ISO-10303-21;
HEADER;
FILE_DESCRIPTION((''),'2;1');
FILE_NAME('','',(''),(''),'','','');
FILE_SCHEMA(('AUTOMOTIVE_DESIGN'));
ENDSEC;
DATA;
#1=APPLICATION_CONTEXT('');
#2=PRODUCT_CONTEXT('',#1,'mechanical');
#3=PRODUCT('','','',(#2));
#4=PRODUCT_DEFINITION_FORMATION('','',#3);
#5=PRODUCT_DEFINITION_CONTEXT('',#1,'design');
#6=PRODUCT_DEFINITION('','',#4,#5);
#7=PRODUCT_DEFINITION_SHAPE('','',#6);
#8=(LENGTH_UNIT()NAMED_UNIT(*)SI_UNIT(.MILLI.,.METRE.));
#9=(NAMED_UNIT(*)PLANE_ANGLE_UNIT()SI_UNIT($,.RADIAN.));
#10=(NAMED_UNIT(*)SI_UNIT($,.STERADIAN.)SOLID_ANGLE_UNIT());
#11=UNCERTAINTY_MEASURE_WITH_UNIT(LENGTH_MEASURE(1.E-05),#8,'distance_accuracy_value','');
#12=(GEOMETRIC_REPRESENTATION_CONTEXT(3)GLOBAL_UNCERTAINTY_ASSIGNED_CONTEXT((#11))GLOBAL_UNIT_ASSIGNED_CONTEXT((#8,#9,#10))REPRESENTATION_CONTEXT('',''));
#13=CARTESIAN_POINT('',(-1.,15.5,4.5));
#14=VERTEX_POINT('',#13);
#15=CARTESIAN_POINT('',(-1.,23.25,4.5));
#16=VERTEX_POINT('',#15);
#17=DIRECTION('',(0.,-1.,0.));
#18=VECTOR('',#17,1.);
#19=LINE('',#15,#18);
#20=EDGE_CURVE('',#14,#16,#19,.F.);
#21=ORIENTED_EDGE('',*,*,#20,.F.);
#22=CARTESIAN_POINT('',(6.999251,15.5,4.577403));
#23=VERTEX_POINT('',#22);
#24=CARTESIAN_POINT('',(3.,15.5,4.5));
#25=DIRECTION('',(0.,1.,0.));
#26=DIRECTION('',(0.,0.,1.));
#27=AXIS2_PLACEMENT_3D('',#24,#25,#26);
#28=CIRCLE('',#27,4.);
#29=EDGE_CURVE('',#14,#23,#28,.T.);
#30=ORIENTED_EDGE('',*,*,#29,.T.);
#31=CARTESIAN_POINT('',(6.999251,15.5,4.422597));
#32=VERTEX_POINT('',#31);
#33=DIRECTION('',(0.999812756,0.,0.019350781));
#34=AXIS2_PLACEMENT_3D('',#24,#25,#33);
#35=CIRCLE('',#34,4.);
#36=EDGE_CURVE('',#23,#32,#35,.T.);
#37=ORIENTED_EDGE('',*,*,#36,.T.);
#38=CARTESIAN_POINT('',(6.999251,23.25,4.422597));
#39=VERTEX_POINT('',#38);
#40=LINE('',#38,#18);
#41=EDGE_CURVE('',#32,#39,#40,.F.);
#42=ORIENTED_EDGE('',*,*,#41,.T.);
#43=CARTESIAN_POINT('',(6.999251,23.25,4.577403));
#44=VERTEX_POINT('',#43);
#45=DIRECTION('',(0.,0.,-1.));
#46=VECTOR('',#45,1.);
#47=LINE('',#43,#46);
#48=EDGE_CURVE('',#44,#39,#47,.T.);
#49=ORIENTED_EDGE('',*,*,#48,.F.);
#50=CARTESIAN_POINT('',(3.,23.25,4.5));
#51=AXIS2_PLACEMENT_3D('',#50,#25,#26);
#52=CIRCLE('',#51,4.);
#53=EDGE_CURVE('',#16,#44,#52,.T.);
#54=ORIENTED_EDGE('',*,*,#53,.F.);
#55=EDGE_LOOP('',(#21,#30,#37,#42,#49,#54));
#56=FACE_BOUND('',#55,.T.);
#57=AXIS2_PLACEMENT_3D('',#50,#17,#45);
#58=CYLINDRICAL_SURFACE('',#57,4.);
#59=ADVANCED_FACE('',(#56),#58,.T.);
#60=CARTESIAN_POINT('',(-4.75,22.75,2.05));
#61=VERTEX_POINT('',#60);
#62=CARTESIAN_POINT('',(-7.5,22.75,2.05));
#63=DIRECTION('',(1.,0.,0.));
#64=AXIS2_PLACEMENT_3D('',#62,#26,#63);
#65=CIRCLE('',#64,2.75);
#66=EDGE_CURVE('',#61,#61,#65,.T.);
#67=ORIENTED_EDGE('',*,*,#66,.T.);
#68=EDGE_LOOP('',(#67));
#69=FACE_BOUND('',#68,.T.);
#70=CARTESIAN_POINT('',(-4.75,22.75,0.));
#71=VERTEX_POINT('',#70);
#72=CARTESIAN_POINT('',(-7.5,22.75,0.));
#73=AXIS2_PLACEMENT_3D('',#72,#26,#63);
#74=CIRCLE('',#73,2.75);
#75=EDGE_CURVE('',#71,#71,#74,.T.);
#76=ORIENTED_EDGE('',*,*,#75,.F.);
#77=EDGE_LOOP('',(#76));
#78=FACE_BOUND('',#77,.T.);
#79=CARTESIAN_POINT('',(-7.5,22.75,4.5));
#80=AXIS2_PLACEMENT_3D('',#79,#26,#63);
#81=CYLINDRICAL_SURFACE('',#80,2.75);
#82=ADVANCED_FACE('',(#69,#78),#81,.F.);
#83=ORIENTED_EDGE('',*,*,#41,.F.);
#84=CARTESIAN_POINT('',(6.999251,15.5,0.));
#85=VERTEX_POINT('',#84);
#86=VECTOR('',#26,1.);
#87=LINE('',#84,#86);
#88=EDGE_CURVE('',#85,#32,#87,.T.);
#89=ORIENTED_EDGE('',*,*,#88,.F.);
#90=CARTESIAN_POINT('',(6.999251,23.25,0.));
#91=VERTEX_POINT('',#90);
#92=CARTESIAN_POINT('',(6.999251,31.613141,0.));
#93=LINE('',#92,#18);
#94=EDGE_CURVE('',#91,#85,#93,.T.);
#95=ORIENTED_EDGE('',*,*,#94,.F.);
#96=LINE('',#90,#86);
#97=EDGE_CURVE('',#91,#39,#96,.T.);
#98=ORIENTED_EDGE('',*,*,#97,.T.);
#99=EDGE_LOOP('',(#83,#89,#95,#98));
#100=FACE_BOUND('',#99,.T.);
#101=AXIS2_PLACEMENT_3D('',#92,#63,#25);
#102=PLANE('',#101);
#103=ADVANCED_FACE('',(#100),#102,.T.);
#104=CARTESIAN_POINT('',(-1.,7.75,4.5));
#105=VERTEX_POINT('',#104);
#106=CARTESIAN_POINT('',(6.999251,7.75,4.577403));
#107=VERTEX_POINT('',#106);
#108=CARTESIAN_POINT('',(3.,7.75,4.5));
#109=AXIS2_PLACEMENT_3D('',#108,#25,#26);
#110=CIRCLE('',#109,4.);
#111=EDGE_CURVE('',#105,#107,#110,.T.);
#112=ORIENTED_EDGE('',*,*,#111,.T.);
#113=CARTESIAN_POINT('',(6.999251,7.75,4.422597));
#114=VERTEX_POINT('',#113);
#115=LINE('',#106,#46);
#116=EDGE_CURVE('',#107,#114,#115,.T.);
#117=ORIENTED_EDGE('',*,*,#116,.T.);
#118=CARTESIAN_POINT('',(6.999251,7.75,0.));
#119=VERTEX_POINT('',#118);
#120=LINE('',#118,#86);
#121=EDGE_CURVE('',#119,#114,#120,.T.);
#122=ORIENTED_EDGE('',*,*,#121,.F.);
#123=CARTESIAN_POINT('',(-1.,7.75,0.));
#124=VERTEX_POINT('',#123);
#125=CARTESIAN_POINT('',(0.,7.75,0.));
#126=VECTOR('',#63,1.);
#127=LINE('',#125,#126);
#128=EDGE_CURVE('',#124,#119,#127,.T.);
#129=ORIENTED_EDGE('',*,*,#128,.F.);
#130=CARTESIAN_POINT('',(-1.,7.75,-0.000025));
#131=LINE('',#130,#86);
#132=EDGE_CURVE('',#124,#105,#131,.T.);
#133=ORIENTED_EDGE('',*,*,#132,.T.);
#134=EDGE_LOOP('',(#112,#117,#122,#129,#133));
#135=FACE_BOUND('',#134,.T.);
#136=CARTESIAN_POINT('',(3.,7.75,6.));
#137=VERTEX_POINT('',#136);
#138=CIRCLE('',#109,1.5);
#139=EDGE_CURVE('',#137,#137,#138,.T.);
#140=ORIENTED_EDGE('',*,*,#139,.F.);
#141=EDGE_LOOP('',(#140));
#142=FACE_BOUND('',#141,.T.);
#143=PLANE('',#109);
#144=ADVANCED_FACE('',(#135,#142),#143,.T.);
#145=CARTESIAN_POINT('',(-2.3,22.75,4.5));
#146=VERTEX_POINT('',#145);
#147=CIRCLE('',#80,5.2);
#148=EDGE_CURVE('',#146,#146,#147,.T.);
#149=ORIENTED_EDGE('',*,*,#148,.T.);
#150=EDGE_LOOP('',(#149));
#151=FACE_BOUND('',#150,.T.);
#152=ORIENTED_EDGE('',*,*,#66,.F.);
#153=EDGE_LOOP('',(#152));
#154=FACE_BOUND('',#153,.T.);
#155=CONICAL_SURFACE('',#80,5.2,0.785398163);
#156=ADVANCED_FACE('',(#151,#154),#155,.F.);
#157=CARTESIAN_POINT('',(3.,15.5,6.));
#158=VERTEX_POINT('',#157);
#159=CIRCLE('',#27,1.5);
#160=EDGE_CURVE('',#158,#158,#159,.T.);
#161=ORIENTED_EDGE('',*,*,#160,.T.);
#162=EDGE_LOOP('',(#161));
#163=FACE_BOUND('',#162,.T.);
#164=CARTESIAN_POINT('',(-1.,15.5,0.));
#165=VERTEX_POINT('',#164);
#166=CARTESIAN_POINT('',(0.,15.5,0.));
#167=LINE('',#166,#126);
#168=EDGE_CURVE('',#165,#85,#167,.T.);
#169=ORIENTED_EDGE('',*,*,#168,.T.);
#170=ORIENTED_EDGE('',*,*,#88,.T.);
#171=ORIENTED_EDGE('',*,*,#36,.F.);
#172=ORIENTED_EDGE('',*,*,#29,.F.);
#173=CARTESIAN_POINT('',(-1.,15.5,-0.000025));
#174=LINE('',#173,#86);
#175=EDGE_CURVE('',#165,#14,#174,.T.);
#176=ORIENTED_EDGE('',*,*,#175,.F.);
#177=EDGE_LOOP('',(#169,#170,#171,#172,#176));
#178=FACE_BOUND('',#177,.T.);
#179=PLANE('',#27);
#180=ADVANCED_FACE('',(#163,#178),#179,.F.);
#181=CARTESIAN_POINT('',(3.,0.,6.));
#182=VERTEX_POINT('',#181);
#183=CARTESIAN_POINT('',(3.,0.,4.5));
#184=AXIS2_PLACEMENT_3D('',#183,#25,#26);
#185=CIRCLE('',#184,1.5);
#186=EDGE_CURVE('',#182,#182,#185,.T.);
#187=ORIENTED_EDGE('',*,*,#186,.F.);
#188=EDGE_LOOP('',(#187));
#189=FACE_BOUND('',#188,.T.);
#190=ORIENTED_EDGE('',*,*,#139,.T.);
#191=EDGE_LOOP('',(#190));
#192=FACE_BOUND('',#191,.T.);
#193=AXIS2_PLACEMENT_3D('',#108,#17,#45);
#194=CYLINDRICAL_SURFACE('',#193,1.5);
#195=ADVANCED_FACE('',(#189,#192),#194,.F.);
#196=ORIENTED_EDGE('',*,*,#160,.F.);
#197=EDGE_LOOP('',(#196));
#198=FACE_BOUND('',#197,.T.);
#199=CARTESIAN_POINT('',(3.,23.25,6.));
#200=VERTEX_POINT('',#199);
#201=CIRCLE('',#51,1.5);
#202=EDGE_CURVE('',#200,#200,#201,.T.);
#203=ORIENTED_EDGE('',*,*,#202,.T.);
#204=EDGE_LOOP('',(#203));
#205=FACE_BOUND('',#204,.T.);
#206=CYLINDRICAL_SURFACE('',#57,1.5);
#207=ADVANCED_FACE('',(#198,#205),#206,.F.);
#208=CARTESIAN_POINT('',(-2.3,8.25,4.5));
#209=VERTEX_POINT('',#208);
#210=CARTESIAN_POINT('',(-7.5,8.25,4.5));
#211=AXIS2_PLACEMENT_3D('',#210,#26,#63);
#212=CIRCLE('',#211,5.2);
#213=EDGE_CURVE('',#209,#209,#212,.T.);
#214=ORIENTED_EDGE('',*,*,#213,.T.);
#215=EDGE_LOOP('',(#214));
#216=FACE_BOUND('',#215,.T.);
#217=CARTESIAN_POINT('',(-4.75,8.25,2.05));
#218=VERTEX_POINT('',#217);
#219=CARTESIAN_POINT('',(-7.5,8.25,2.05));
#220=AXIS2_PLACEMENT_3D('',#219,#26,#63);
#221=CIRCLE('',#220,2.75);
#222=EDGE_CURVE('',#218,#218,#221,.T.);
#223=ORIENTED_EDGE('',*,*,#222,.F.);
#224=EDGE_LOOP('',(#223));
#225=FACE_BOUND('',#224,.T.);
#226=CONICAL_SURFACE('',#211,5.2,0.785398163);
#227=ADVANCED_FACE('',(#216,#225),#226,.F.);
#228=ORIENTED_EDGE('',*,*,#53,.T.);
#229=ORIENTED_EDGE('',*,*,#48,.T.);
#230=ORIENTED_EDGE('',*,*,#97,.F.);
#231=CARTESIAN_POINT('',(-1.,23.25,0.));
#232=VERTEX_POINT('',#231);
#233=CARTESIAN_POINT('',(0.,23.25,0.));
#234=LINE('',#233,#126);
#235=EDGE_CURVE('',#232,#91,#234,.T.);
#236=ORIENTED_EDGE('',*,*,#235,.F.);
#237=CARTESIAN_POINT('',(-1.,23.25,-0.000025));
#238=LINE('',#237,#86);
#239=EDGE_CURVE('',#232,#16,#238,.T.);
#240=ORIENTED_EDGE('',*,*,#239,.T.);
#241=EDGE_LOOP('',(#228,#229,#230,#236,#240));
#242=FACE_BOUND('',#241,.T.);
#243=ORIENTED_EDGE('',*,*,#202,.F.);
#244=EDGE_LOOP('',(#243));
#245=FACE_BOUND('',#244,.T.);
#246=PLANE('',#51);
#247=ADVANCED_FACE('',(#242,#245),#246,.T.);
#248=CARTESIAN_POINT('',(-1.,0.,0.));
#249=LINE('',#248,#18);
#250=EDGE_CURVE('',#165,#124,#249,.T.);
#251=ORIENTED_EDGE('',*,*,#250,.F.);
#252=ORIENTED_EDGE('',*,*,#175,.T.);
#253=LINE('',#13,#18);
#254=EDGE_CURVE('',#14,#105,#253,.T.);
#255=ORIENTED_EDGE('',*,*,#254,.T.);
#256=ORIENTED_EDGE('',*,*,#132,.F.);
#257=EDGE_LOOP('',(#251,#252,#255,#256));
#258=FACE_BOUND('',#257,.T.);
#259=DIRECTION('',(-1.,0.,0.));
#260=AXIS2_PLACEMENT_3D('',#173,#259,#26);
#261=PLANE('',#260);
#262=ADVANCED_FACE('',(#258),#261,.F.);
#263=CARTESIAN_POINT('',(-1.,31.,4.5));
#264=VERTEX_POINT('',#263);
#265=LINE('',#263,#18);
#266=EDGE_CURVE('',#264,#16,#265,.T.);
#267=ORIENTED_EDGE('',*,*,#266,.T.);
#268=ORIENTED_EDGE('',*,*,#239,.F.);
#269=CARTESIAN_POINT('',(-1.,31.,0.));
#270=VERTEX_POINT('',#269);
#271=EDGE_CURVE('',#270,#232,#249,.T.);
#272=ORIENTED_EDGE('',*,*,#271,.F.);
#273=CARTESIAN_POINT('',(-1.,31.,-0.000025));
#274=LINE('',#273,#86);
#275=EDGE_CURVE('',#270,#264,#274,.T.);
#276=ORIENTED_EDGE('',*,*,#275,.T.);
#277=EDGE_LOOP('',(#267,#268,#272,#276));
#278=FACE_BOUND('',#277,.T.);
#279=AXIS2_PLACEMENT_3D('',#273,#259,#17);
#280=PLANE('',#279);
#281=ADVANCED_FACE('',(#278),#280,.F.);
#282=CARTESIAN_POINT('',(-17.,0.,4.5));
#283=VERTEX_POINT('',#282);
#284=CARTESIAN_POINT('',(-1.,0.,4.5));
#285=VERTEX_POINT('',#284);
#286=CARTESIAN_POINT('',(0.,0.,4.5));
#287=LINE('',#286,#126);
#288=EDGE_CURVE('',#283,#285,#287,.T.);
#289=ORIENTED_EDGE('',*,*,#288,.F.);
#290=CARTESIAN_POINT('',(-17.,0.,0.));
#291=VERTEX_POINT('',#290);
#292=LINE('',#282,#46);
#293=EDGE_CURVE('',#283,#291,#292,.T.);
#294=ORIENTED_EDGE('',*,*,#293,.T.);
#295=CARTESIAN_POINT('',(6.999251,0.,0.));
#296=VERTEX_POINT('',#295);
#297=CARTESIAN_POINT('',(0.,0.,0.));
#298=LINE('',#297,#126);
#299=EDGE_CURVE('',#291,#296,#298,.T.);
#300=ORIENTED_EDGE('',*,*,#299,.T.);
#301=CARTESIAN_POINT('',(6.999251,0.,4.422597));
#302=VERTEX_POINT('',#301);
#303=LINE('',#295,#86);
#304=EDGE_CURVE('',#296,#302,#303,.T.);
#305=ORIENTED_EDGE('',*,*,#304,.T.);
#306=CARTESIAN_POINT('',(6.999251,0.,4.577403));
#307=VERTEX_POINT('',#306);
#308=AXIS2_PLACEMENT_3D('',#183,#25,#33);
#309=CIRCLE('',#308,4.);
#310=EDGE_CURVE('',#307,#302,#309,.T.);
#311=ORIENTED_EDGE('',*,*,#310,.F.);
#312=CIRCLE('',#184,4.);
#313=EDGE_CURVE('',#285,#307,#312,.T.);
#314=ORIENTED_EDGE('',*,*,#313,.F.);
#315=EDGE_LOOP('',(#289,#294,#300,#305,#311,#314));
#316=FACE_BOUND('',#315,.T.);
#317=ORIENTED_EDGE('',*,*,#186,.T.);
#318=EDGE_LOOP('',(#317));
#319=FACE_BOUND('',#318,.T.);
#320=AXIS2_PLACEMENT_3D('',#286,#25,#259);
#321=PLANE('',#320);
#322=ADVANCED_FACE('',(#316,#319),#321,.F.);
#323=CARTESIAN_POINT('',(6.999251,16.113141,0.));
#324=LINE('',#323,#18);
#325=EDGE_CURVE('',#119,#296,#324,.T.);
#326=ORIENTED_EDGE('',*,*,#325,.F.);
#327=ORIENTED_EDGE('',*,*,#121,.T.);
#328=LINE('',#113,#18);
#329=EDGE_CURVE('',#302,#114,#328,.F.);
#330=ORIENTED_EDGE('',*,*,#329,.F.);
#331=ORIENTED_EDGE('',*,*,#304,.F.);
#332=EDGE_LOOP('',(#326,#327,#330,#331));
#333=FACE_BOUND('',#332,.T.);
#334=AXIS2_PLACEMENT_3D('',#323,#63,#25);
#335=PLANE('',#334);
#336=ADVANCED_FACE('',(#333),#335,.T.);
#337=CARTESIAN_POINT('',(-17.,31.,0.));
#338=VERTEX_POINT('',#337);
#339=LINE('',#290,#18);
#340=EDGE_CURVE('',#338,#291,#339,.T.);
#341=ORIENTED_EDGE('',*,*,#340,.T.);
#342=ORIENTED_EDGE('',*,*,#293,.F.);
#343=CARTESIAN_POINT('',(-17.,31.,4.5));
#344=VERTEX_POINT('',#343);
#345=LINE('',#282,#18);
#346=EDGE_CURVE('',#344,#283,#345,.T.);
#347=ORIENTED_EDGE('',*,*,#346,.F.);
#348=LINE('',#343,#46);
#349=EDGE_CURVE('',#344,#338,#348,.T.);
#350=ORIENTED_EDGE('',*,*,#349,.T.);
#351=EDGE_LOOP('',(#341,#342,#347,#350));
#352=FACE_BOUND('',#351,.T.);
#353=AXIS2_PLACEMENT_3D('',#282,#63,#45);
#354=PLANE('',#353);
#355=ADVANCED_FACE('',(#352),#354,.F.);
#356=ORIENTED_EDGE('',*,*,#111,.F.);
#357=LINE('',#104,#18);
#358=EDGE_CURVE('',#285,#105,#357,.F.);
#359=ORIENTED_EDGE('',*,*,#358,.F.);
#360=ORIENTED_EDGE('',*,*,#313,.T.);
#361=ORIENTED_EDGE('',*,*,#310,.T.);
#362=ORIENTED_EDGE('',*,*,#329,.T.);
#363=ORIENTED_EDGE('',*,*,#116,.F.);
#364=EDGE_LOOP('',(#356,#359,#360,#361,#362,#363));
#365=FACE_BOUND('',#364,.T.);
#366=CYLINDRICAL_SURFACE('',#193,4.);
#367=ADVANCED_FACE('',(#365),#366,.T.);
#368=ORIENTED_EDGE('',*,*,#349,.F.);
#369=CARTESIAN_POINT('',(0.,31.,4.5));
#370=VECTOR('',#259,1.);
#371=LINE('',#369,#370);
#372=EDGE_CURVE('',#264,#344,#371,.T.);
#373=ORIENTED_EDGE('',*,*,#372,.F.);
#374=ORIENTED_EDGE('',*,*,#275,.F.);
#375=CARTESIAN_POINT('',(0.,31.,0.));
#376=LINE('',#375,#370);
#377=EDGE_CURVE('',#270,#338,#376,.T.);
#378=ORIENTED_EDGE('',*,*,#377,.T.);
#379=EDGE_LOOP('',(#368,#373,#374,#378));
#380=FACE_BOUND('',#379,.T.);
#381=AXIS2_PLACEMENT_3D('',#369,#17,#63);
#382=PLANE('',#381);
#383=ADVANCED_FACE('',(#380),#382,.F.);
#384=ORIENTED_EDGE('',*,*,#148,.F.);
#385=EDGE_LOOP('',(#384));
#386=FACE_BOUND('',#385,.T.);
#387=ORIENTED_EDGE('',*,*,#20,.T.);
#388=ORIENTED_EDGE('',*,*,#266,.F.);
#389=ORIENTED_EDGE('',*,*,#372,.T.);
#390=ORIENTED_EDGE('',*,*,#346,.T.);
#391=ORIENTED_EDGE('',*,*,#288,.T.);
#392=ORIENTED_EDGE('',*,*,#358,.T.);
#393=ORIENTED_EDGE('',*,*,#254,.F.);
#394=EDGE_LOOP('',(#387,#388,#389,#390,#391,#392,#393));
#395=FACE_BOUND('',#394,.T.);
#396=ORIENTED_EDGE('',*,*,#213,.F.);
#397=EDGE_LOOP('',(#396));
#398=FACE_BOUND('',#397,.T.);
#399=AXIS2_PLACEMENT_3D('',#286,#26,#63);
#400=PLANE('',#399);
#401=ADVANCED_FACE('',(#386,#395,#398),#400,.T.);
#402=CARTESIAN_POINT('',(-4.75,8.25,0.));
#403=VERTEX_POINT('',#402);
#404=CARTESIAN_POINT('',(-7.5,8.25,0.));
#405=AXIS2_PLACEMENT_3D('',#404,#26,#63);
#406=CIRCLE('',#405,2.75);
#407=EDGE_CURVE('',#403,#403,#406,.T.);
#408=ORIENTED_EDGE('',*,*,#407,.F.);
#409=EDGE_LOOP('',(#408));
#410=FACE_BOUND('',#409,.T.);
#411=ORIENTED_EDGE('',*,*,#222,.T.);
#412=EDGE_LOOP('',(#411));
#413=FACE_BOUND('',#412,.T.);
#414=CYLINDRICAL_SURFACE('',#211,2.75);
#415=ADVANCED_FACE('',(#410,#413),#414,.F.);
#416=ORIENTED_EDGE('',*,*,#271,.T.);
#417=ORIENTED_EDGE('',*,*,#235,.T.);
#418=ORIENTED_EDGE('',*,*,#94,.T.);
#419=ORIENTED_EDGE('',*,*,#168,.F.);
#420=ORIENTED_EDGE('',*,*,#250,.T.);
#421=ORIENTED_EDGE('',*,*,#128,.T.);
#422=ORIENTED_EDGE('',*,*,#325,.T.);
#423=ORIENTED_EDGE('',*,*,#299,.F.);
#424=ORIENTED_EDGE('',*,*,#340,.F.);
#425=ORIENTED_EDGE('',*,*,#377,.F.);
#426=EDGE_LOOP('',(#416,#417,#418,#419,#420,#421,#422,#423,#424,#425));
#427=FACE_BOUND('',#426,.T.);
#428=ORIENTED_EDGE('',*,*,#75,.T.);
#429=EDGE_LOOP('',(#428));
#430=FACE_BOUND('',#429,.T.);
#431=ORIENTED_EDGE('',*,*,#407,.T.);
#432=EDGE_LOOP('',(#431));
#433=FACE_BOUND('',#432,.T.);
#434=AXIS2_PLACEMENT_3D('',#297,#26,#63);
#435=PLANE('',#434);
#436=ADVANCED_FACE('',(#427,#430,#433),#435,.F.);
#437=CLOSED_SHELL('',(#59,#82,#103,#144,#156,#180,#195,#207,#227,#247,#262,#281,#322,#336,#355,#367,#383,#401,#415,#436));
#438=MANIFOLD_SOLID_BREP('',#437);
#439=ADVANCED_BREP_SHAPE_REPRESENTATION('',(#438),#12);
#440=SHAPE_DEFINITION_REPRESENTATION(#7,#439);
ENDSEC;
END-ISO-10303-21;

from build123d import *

# Parameters (mm, degrees)
SKETCH1_W                                      = 17
SKETCH1_H                                      = 31
BOSS_EXTRUDE1_DEPTH                            = 4.5
SKETCH2_R                                      = 4
SKETCH2_R_2                                    = 1.5
BOSS_EXTRUDE2_DEPTH                            = 7.75
FILLET2_R                                      = 15
CSK_FOR_M5_FLAT_HEAD_MACHINE_SCREW1_AT_2_COUNT = 2
CSK_FOR_M5_FLAT_HEAD_MACHINE_SCREW1_AT_2_PITCH = 14.5
BOSS_EXTRUDE4_DEPTH                            = 7.75
LPATTERN1_START                                = 15.5
LPATTERN1_OUTLINE_R                            = 1.5
LPATTERN1_DEPTH                                = 7.75
SKETCH7_W                                      = 1
SKETCH7_H                                      = 7.75
CUT_EXTRUDE1_DEPTH                             = 36.640566774


# Read off the part's stored shape, not the designer's step: LPattern1
with BuildPart() as part:
    # Sketch1 → Boss-Extrude1 (new body)
    with BuildSketch(Plane.XY):
        with Locations((-8.5, 15.5)):
            Rectangle(SKETCH1_W, SKETCH1_H)
    extrude(amount=BOSS_EXTRUDE1_DEPTH)

    # Sketch2 → Boss-Extrude2 (add)
    with BuildSketch(Plane(origin=(0, 0, 0), x_dir=(1, 0, 0), z_dir=(0, 1, 0))):
        with Locations((3, -4.5)):
            Circle(SKETCH2_R)
        with Locations(Location((3, -4.5, 0), (0, 0, 270))):
            Circle(SKETCH2_R_2, mode=Mode.SUBTRACT)
    extrude(amount=BOSS_EXTRUDE2_DEPTH)

    # Fillet2
    # the kernel refuses this fillet: 15 mm, written as the material it adds along each edge
    with BuildSketch(Plane(origin=(0, 7.75, 1.854248689), x_dir=(0.9211814219318991, 0, -0.389133380587588), z_dir=(0, -1, 0))) as fillet2_piece_1:
        with BuildLine():
            CenterArc((9.970466155, -13.517314112), FILLET2_R, 115.689791336, 12.37807292)
            Line((0.721550061, -1.708099444), (0.536571739, -1.471915151))
            ThreePointArc((0.536571739, -1.471915151), (0.084420604, -0.970789736), (-0.276354427, -0.116740014))
            Line((-0.276354427, -0.116740014), (0.130049559, 0.270346282))
            ThreePointArc((0.130049559, 0.270346282), (1.733994114, -0.095382903), (3.337938669, 0.270346282))
            Line((3.337938669, 0.270346282), (3.467988228, 0))
        make_face()
    extrude(amount=7.75)

    # Sketch4 → CSK for M5 Flat Head Machine Screw1 (revolve, cut)
    with BuildSketch(Plane(origin=(-7.5, 8.25, 4.5), x_dir=(0, -1, 0), z_dir=(1, 0, 0))):
        Polygon((0, 0), (0, 4.5), (2.75, 4.5), (2.75, 2.45), (5.2, 0), align=None)
    csk_for_m5_flat_head_machine_screw1 = revolve(axis=Axis((-7.5, 8.25, 10.85), (0, 0, -1)), mode=Mode.SUBTRACT)

    # CSK for M5 Flat Head Machine Screw1 at 2: CSK for M5 Flat Head Machine Screw1 ×2
    with Locations(*[(0, i * CSK_FOR_M5_FLAT_HEAD_MACHINE_SCREW1_AT_2_PITCH, 0) for i in range(1, CSK_FOR_M5_FLAT_HEAD_MACHINE_SCREW1_AT_2_COUNT)]):
        add(csk_for_m5_flat_head_machine_screw1, mode=Mode.SUBTRACT)

    # Sketch6 → Boss-Extrude4 (add)
    with BuildSketch(Plane.XZ):
        Polygon((0, 0), (6.999251024, 0), (6.999251024, 4.577403122), align=None)
    extrude(amount=-BOSS_EXTRUDE4_DEPTH)

    # LPattern1 outline → LPattern1 (add)
    with BuildSketch(Plane(origin=(0, 0, 0), x_dir=(1, 0, 0), z_dir=(0, 1, 0)).offset(LPATTERN1_START)):
        with BuildLine():
            Line((6.999251024, 0), (0, 0))
            Line((0, 0), (0, -4.5))
            Line((0, -4.5), (-1, -4.5))
            ThreePointArc((-1, -4.5), (3.038703373, -8.499812752), (6.999251024, -4.422596878))
            Line((6.999251024, -4.422596878), (6.999251024, 0))
        make_face()
        with Locations((3, -4.5)):
            Circle(LPATTERN1_OUTLINE_R, mode=Mode.SUBTRACT)
    extrude(amount=LPATTERN1_DEPTH)

    # Sketch7 → Cut-Extrude1 (cut, through all)
    with BuildSketch(Plane.XY.offset(4.5)):
        with Locations((-0.5, 11.625)):
            Rectangle(SKETCH7_W, SKETCH7_H)
        with Locations((-0.5, 27.125)):
            Rectangle(SKETCH7_W, SKETCH7_H)
    extrude(amount=-CUT_EXTRUDE1_DEPTH, mode=Mode.SUBTRACT)


solid = part.part
